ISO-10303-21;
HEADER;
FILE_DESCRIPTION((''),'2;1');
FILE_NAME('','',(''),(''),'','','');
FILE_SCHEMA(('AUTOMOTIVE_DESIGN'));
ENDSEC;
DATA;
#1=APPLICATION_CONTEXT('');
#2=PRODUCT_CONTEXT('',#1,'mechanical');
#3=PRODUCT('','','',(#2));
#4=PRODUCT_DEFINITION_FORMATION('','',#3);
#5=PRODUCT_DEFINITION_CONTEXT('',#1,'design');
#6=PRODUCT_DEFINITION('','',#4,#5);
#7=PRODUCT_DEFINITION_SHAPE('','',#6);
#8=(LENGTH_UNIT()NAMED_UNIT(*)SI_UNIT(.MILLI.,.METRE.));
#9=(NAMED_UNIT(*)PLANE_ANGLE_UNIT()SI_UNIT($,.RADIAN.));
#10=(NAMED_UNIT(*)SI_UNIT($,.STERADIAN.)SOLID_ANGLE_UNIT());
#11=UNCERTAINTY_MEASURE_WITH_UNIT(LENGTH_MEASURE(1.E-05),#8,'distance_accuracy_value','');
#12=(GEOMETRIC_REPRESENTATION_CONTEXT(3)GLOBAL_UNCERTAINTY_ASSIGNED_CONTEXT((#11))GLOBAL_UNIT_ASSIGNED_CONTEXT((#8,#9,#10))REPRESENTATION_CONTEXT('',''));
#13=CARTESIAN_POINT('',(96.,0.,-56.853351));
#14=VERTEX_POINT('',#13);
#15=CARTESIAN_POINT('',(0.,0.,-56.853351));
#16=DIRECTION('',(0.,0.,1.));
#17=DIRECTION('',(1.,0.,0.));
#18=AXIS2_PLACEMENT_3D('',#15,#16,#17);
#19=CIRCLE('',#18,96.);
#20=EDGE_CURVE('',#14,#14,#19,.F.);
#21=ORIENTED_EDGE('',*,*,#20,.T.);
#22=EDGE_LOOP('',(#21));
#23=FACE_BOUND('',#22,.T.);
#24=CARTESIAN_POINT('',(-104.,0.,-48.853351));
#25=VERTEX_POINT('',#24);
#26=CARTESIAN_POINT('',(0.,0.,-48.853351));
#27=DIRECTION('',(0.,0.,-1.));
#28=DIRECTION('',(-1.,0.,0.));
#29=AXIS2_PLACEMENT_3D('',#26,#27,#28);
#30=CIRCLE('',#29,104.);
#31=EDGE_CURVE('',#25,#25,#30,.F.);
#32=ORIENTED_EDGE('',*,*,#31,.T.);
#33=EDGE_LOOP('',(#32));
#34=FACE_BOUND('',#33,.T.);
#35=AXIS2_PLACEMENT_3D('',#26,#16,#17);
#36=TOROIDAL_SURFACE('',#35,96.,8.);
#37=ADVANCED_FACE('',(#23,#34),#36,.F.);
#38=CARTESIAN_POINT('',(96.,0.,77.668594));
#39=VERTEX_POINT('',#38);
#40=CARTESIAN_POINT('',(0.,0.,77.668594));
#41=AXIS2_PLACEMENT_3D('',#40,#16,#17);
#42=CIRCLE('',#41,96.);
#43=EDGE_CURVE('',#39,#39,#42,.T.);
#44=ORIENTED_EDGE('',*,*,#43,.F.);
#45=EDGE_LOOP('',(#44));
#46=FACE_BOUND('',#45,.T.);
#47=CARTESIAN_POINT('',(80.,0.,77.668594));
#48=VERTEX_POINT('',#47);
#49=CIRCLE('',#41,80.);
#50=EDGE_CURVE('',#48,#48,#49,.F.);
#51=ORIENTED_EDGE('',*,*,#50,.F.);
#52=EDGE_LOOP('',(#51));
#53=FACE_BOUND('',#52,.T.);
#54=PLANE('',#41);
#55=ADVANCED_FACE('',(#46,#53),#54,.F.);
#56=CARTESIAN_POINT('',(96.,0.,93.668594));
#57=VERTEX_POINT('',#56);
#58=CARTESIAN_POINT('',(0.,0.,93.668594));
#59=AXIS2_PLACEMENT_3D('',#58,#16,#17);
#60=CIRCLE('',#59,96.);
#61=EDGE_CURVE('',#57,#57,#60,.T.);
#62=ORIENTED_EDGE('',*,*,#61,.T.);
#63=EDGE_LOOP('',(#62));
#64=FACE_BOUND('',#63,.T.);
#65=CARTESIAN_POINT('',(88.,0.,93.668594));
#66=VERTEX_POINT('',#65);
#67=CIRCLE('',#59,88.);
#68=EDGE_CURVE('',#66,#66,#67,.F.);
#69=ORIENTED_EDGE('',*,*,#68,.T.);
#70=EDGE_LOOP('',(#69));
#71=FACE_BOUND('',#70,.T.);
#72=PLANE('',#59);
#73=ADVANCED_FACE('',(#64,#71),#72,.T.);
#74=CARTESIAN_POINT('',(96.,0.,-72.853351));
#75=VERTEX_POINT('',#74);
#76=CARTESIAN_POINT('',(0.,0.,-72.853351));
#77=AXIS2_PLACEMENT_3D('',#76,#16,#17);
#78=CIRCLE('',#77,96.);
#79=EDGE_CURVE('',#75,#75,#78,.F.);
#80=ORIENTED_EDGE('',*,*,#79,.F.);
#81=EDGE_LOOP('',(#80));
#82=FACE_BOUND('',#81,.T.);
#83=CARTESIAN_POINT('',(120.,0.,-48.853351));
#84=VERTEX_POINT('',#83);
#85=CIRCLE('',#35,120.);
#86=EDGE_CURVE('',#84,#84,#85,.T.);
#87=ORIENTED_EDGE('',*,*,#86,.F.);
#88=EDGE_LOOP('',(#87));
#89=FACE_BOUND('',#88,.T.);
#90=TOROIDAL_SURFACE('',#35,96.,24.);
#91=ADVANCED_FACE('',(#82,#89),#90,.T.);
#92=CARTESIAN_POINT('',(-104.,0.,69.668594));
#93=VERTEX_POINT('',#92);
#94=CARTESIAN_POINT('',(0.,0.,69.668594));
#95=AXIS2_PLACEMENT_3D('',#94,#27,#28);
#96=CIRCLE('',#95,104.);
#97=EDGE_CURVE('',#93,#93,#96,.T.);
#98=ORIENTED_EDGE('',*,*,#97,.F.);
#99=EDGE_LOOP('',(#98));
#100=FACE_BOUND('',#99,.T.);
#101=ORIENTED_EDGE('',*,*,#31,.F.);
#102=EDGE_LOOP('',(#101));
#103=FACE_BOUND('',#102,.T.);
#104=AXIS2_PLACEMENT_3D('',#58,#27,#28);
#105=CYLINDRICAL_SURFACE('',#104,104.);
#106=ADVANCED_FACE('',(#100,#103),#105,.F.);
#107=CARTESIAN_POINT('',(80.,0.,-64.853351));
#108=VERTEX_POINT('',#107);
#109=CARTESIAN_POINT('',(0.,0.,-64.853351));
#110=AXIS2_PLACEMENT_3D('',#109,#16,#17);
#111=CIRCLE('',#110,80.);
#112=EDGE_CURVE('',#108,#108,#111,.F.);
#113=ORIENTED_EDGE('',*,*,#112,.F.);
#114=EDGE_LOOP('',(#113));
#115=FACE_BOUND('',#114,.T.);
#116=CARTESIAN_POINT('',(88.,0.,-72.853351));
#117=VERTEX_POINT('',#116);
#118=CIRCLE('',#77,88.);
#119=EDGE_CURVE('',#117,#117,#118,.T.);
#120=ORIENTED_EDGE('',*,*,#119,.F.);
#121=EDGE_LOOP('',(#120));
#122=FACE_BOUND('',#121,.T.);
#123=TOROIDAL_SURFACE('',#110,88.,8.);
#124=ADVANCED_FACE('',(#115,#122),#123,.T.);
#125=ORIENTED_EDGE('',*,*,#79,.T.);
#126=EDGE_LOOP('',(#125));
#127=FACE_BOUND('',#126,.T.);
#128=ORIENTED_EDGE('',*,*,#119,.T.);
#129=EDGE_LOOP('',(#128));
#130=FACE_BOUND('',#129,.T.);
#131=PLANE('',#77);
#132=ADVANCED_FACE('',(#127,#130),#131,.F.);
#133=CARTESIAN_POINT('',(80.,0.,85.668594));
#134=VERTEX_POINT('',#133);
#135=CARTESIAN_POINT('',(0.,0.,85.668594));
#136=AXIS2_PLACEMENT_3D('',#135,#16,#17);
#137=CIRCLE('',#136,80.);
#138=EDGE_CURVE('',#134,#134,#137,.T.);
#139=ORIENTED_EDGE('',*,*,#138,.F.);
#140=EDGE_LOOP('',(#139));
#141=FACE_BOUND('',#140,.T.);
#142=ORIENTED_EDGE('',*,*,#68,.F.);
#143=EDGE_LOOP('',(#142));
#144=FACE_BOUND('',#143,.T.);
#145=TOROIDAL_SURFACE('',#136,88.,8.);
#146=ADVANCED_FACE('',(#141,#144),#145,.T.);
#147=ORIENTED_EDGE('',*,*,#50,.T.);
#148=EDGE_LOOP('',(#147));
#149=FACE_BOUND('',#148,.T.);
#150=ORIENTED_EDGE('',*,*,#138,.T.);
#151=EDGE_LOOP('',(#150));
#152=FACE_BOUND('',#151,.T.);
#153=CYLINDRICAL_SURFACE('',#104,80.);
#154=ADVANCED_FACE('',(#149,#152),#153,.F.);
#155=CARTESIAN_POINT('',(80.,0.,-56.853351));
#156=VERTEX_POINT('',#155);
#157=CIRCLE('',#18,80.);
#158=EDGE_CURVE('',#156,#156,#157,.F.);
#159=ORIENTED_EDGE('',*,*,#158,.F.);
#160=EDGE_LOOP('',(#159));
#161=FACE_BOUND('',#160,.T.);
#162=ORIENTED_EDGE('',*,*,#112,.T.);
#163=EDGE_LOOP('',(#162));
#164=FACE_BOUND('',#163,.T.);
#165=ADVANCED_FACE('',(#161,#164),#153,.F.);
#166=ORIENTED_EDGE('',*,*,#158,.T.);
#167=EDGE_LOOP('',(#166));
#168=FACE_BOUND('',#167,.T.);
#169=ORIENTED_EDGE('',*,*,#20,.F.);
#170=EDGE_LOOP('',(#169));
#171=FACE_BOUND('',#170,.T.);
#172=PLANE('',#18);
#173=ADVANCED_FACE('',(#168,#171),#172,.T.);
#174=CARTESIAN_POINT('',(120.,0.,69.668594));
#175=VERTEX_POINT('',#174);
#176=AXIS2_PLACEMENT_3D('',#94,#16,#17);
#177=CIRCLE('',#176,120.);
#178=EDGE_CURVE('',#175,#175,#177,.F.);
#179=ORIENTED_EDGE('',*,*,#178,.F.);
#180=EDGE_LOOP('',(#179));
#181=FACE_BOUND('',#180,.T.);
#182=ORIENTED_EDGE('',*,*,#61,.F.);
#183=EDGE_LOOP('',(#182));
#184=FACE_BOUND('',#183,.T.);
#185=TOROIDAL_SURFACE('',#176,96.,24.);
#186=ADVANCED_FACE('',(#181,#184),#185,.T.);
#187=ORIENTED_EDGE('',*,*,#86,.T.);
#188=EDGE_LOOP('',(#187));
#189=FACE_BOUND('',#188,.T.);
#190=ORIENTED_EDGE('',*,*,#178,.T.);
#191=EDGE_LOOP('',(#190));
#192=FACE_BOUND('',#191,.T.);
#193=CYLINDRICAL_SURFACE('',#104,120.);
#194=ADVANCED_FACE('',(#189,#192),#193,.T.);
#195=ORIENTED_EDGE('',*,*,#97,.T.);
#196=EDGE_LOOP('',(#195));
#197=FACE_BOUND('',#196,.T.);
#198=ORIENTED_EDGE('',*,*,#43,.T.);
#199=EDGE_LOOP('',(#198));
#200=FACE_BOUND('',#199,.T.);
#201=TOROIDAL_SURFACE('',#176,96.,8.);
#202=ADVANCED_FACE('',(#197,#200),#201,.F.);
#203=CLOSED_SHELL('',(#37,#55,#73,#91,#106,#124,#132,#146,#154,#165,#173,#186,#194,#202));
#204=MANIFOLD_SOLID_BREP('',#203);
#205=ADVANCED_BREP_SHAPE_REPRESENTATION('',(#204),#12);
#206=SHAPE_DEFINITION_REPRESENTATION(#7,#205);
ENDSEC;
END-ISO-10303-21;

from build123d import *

# Parameters (mm, degrees)
CROQUIS1_R            = 15
CROQUIS1_R_2          = 10
EXTRUIR_L_MINA1_DEPTH = 20.815243217
REDONDEO1_R           = 3
REDONDEO2_R           = 1
ESCALA4_SCALE         = 4
ESCALA6_SCALE         = 2


# Read off the part's stored shape, not the designer's step: Vaciado1
with BuildPart() as part:
    # Croquis1 → Extruir-Lámina1 (new body)
    with BuildSketch(Plane.XY):
        Circle(CROQUIS1_R)
        Circle(CROQUIS1_R_2, mode=Mode.SUBTRACT)
    extrude(amount=EXTRUIR_L_MINA1_DEPTH)

    # Redondeo1
    redondeo1_edges = [part.edges().sort_by_distance(p)[0] for p in [
        (-15, 0, 0),
        (-15, 0, 20.815243217),
    ]]
    fillet(redondeo1_edges, radius=REDONDEO1_R)

    # Redondeo2
    redondeo2_edges = [part.edges().sort_by_distance(p)[0] for p in [
        (-10, 0, 0),
        (-10, 0, 20.815243217),
    ]]
    fillet(redondeo2_edges, radius=REDONDEO2_R)

    # Vaciado1 outline → Vaciado1 (revolve, cut)
    with BuildSketch(Plane.XZ):
        with BuildLine():
            Line((12, 18.815243217), (10, 18.815243217))
            Line((10, 18.815243217), (10, 2))
            Line((10, 2), (12, 2))
            ThreePointArc((12, 2), (12.707106781, 2.292893219), (13, 3))
            Line((13, 3), (13, 17.815243217))
            ThreePointArc((13, 17.815243217), (12.707106781, 18.522349998), (12, 18.815243217))
        make_face()
    revolve(axis=Axis((0, 0, 0), (0, 0, 1)), mode=Mode.SUBTRACT)


with BuildPart() as part_1:
    # Escala4: scaled about (0, 0, 10.407621608)
    add(part.part.scale(ESCALA4_SCALE).moved(Location((0, 0, -31.222864824))))


with BuildPart() as part_2:
    # Escala6: scaled about (0, 0, 10.407621608)
    add(part_1.part.scale(ESCALA6_SCALE).moved(Location((0, 0, -10.407621608))))


solid = part_2.part
